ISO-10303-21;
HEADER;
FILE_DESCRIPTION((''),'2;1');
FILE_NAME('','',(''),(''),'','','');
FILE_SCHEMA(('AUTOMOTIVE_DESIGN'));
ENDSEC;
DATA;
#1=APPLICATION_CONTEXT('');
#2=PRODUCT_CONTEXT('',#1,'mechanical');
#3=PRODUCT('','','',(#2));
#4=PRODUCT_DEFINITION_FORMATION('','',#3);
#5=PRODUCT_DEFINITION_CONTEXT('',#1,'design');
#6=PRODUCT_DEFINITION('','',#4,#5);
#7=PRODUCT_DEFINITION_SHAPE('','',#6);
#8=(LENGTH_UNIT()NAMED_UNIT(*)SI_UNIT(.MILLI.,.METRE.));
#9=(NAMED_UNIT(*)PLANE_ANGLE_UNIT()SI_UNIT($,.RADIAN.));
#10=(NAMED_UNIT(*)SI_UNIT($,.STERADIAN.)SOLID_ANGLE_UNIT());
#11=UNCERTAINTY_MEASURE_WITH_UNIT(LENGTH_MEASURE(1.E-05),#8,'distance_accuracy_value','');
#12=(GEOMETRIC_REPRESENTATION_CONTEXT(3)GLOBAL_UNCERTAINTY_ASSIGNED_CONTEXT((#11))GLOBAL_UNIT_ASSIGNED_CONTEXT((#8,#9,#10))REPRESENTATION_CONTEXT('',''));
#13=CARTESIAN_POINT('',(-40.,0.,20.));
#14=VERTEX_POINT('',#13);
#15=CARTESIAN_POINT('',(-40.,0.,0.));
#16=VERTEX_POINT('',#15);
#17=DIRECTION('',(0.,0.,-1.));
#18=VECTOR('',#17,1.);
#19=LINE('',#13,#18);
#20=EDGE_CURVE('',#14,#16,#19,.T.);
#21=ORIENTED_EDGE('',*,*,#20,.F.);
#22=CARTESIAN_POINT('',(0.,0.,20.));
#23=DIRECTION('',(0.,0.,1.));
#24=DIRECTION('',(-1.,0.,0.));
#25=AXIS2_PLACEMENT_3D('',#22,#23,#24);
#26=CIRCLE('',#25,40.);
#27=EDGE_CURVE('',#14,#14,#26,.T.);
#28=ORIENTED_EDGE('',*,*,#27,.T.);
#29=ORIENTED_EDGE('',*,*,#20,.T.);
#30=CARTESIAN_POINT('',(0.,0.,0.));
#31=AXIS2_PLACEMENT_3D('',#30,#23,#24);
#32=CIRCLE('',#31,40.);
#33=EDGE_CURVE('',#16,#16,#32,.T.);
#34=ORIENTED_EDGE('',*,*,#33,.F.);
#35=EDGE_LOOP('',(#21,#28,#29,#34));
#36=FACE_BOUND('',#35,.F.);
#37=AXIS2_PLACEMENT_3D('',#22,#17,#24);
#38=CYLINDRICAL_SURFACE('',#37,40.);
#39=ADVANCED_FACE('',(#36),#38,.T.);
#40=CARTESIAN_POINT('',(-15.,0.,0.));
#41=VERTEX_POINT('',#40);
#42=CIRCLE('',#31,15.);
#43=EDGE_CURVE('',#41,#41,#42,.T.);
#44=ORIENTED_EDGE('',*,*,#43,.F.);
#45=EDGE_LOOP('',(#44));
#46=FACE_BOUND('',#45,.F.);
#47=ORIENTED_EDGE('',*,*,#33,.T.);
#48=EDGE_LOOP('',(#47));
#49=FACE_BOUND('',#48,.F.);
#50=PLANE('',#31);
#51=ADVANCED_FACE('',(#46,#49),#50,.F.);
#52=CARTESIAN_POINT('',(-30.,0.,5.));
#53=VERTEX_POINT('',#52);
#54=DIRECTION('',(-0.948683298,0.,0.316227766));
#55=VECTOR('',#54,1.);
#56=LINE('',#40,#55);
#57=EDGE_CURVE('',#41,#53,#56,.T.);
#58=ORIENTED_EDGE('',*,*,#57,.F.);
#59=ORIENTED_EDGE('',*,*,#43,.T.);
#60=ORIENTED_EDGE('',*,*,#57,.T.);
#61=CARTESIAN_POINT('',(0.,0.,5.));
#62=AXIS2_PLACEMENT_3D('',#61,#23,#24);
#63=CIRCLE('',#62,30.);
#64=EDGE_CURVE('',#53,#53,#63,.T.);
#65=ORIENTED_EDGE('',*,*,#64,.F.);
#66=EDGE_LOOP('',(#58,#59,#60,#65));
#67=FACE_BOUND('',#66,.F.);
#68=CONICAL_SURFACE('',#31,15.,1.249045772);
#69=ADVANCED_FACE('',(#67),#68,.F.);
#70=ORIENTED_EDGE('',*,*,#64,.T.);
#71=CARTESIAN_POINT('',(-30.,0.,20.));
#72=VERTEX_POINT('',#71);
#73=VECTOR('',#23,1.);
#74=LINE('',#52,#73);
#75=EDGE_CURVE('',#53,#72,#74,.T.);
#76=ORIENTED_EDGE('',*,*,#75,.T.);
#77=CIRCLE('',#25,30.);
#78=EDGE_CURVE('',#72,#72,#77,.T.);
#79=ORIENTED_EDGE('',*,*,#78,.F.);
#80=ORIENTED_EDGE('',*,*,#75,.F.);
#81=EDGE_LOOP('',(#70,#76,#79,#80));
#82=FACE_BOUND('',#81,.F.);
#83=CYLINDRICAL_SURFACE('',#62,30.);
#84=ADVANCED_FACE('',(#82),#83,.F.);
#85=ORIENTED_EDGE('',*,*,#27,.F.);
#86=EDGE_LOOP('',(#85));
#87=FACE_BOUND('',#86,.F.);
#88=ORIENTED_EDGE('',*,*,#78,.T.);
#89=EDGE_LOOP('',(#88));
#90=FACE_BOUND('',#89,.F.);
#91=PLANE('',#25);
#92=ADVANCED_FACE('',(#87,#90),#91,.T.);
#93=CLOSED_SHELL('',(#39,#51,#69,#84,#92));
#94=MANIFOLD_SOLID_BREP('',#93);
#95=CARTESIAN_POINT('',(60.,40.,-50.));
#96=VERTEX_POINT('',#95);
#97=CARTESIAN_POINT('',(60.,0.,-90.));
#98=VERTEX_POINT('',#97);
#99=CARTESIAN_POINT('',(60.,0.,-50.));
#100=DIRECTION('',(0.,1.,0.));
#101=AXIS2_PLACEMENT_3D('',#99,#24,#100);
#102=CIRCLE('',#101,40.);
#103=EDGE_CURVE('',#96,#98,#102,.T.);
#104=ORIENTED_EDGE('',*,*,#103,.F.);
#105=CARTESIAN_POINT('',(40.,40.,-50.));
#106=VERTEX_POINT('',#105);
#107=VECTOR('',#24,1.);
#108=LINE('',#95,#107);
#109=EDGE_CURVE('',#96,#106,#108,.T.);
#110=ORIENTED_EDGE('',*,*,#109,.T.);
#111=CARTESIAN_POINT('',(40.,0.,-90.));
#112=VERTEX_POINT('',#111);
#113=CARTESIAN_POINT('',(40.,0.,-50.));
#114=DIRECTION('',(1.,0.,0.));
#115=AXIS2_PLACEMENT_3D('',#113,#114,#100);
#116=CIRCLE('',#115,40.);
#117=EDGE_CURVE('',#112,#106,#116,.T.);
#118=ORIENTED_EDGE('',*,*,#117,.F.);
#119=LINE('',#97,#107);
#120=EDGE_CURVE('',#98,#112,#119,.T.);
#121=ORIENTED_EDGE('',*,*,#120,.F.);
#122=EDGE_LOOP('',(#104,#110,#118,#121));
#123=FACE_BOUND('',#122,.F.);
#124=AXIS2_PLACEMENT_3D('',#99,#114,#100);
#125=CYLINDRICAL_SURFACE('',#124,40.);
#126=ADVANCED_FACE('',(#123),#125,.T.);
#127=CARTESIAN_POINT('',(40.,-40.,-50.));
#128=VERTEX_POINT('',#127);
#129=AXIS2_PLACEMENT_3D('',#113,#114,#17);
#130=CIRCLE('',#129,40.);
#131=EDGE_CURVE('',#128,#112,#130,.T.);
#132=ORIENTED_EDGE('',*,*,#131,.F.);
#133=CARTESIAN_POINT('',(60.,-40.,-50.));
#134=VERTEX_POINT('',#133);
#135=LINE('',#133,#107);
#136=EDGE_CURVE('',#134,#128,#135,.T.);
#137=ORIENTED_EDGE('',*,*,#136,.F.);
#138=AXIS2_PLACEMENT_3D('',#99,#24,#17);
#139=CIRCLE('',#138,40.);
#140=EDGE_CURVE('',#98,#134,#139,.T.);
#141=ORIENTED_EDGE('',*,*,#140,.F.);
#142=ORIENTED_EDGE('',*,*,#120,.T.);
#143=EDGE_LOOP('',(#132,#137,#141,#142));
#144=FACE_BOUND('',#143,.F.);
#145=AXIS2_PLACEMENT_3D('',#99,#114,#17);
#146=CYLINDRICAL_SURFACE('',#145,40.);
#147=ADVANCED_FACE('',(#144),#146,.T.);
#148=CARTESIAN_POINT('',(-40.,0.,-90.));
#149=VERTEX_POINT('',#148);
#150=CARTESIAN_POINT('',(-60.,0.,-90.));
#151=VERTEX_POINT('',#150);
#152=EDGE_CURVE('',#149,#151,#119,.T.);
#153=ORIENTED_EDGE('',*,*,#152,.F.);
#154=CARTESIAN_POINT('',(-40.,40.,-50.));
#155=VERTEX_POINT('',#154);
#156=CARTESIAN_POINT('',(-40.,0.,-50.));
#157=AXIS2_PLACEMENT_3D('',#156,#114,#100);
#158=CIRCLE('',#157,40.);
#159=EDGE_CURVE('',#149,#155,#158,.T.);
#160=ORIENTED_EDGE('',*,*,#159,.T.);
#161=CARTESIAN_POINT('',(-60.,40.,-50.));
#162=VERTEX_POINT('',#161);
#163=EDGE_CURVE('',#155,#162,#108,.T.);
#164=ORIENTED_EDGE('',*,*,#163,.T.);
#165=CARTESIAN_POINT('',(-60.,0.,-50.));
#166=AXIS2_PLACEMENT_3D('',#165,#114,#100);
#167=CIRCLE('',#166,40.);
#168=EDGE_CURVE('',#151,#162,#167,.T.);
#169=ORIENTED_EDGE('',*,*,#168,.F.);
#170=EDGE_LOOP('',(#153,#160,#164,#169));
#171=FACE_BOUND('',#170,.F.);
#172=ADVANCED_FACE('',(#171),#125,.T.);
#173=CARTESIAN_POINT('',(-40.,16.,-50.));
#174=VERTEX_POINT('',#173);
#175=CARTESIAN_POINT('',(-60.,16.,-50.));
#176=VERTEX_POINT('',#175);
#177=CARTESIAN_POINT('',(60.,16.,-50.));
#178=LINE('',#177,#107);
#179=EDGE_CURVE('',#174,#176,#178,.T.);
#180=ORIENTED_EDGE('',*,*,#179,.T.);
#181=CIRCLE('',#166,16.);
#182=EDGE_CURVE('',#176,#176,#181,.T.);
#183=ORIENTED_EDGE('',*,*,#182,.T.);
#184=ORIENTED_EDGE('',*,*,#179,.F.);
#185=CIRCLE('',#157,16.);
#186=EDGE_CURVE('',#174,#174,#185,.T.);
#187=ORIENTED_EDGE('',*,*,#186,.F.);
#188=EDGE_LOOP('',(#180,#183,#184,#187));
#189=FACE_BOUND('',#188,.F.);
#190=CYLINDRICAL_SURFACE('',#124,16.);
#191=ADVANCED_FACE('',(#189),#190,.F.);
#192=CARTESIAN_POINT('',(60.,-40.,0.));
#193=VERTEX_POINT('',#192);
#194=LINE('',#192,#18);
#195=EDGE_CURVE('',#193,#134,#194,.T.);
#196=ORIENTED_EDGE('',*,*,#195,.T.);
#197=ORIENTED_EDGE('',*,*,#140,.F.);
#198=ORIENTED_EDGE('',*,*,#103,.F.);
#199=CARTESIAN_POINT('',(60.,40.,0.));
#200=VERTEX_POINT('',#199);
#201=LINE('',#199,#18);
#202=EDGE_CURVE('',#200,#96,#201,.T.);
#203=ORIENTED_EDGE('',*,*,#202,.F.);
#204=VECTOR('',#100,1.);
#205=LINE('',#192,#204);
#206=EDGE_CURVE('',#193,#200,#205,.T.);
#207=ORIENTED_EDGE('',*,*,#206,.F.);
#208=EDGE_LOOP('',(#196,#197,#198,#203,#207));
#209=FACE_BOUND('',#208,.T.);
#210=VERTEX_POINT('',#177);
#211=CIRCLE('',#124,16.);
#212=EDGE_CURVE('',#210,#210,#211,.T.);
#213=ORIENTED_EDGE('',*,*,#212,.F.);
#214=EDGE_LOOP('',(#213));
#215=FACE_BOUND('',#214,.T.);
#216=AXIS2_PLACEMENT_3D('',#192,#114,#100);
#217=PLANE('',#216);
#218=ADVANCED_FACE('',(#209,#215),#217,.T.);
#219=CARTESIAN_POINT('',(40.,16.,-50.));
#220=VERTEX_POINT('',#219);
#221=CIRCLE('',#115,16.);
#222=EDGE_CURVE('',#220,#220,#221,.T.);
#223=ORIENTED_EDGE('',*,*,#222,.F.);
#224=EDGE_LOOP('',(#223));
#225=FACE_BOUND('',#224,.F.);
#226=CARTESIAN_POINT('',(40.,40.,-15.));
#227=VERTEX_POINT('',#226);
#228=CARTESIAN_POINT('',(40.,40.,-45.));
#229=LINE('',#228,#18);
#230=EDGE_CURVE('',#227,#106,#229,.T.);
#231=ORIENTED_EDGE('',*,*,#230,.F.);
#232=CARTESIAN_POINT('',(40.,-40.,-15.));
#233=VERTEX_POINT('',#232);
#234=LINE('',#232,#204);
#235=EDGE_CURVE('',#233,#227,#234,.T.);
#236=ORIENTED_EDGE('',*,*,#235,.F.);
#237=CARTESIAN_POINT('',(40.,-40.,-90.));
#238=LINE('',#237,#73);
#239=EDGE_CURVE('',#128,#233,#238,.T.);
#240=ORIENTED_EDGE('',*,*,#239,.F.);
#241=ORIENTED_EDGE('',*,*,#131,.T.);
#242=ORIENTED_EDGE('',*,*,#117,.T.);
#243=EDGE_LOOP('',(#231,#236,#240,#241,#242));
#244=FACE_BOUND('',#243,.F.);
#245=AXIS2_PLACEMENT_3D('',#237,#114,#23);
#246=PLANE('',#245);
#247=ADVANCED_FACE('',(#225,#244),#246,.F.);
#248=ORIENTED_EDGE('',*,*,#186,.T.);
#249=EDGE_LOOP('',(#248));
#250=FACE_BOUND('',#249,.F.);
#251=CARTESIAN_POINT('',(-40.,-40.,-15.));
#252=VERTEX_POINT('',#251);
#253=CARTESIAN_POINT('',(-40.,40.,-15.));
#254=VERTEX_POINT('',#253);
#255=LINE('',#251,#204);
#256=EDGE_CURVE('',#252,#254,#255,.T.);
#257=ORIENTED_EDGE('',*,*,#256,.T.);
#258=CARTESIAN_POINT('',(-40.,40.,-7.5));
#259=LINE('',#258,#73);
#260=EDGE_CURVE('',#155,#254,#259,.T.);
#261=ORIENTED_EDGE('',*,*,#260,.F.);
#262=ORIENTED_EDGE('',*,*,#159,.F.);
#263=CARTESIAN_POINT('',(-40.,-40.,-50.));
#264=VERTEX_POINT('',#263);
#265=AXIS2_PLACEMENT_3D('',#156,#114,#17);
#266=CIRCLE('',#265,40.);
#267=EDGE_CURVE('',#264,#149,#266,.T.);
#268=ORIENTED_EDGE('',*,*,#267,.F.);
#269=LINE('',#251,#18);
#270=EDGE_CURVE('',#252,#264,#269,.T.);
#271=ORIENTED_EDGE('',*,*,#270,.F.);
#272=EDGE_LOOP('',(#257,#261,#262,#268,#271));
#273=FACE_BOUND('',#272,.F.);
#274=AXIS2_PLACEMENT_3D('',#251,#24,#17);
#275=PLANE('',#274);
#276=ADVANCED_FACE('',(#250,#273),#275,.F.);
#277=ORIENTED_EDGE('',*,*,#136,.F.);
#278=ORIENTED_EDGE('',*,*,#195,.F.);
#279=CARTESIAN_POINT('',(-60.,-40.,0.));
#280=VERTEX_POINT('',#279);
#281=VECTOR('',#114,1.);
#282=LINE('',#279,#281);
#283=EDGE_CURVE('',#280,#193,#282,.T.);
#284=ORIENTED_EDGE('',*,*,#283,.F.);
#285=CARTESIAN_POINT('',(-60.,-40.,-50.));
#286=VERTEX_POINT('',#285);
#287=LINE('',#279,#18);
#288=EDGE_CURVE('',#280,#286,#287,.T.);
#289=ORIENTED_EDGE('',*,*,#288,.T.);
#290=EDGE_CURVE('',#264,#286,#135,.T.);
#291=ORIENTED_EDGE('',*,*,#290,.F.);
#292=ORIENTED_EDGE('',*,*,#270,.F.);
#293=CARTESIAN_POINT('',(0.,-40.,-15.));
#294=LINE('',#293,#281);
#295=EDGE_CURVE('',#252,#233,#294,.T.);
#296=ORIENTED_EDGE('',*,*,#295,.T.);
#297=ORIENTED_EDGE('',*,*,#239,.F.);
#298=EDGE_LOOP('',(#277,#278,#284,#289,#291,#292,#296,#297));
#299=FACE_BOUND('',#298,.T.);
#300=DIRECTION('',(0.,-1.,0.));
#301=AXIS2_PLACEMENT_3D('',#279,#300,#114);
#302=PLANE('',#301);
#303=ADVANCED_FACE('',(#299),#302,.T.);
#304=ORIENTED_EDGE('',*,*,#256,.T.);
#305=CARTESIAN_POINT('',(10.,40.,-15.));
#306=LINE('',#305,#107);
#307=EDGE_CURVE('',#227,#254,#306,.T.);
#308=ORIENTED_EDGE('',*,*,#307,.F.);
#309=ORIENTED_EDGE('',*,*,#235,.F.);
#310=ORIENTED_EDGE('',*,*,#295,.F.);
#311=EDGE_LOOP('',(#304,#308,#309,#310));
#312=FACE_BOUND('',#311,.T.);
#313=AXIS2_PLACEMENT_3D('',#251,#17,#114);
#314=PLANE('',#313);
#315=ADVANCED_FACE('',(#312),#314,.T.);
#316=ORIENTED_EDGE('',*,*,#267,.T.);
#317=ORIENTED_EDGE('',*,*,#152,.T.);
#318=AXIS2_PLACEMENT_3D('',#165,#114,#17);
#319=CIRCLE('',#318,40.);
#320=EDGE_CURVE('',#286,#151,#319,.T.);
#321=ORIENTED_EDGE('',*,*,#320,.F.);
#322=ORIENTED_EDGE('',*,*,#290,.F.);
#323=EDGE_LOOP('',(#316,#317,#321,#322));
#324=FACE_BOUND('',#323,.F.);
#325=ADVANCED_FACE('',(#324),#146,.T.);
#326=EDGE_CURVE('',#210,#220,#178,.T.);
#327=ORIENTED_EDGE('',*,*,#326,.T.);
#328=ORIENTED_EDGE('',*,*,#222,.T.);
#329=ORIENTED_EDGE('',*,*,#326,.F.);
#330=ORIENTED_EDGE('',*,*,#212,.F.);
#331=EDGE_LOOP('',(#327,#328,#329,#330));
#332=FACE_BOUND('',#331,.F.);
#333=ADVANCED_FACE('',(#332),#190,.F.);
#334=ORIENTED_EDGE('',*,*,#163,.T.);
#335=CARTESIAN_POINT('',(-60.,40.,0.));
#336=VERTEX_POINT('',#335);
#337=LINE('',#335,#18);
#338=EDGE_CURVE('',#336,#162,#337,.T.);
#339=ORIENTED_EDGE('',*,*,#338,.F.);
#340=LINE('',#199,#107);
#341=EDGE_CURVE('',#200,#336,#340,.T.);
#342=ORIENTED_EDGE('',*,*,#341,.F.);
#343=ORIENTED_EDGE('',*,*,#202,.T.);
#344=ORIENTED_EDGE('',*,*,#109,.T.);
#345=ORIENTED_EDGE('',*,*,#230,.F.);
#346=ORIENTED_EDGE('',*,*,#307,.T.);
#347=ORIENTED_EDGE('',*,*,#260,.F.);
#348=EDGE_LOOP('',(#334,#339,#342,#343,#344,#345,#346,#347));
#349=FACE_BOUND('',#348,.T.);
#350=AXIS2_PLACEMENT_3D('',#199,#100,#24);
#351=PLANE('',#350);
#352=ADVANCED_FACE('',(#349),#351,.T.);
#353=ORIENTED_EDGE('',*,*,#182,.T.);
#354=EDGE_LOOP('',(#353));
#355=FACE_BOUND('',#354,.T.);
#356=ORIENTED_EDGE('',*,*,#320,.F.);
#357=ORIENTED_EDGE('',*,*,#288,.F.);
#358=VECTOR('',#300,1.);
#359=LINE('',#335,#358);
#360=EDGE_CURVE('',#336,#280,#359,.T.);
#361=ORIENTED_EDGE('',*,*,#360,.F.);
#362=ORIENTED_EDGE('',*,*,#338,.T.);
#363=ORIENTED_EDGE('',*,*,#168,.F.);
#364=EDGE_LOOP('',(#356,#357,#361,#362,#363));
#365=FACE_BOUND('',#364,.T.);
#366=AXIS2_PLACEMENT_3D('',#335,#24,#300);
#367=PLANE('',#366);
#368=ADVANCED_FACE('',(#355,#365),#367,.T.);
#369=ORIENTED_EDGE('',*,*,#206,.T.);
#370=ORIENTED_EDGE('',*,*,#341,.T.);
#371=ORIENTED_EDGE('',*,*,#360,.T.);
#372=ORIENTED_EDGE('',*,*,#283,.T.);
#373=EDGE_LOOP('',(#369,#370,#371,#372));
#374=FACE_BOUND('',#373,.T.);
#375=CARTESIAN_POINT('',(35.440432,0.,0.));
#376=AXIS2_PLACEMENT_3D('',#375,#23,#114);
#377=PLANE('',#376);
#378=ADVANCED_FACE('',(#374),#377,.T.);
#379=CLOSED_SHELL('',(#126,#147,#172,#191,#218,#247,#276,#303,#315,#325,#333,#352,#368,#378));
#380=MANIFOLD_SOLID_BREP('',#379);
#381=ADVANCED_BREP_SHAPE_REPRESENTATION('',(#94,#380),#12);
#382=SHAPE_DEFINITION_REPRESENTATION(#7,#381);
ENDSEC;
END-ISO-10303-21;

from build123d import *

# Parameters (mm, degrees)
F0_R     = 30
F0_R_2   = 15
F1_DEPTH = 90
F2_R     = 16
F3_DEPTH = 250
F4_DEPTH = 250
F5_DEPTH = 250
F6_W     = 80
F6_H     = 40
F6_H_2   = 35
F7_DEPTH = 250
F8_DEPTH = 25


# Not quite as in the source:
# - a feature names something its author has since deleted; it is built from what else it names


with BuildPart() as f1:
    # F0 (on Top) → F1 (new body)
    with BuildSketch(Plane.XY):
        with BuildLine():
            Line((0, -40), (60, -40))
            Line((60, -40), (60, 40))
            Line((60, 40), (0, 40))
            ThreePointArc((0, 40), (28.2842712475, 28.2842712475), (40, 0))
            ThreePointArc((40, 0), (28.2842712475, -28.2842712475), (0, -40))
        make_face()
        with BuildLine():
            Line((-60, -40), (0, -40))
            ThreePointArc((0, -40), (-40, 0), (0, 40))
            Line((0, 40), (-60, 40))
            Line((-60, 40), (-60, -40))
        make_face()
        with BuildLine():
            ThreePointArc((0, 40), (-40, 0), (0, -40))
            ThreePointArc((0, -40), (28.2842712475, -28.2842712475), (40, 0))
            ThreePointArc((40, 0), (28.2842712475, 28.2842712475), (0, 40))
        make_face()
        Circle(F0_R, mode=Mode.SUBTRACT)
        Circle(F0_R)
        Circle(F0_R_2, mode=Mode.SUBTRACT)
        Circle(F0_R_2)
    extrude(amount=-F1_DEPTH)

    # F2 (on face) → F3 (cut)
    with BuildSketch(Plane.YZ.offset(60)):
        with BuildLine():
            ThreePointArc((0, -90), (-28.2842712475, -78.2842712475), (-40, -50))
            Line((-40, -50), (-40, -90))
            Line((-40, -90), (0, -90))
        make_face()
        with BuildLine():
            Line((40, -90), (40, -50))
            ThreePointArc((40, -50), (28.2842712475, -78.2842712475), (0, -90))
            Line((0, -90), (40, -90))
        make_face()
        with Locations((0, -50)):
            Circle(F2_R)
    extrude(amount=-F3_DEPTH, mode=Mode.SUBTRACT)

    # F2 (on face) → F4 (cut)
    with BuildSketch(Plane.YZ.offset(60)):
        with Locations((0, -50)):
            Circle(F2_R)
    extrude(amount=-F4_DEPTH, mode=Mode.SUBTRACT)

    # F2 (on face) → F5 (cut)
    with BuildSketch(Plane.YZ.offset(60)):
        with Locations((0, -50)):
            Circle(F2_R)
    extrude(amount=-F5_DEPTH, mode=Mode.SUBTRACT)

    # F6 (on face) → F7 (cut)
    with BuildSketch(Plane.XZ.offset(40)):
        with Locations((0, -70)):
            Rectangle(F6_W, F6_H)
        with Locations((0, -32.5)):
            Rectangle(F6_W, F6_H_2)
    extrude(amount=-F7_DEPTH, mode=Mode.SUBTRACT)

    # F2 (on face) → F8 (cut)
    with BuildSketch(Plane.YZ.offset(60)):
        with BuildLine():
            ThreePointArc((0, -90), (-28.2842712475, -78.2842712475), (-40, -50))
            Line((-40, -50), (-40, -90))
            Line((-40, -90), (0, -90))
        make_face()
    extrude(amount=-F8_DEPTH, mode=Mode.SUBTRACT)


with BuildPart() as f10:
    # F9 (on Front) → F10 (revolve)
    with BuildSketch(Plane.XZ):
        Polygon((-40, 20), (-40, 0), (-15, 0), (-30, 5), (-30, 20), align=None)
    revolve(axis=Axis((0, 0, 21.7640828341), (0, 0, 1)))


solid = Compound([f1.part, f10.part])
